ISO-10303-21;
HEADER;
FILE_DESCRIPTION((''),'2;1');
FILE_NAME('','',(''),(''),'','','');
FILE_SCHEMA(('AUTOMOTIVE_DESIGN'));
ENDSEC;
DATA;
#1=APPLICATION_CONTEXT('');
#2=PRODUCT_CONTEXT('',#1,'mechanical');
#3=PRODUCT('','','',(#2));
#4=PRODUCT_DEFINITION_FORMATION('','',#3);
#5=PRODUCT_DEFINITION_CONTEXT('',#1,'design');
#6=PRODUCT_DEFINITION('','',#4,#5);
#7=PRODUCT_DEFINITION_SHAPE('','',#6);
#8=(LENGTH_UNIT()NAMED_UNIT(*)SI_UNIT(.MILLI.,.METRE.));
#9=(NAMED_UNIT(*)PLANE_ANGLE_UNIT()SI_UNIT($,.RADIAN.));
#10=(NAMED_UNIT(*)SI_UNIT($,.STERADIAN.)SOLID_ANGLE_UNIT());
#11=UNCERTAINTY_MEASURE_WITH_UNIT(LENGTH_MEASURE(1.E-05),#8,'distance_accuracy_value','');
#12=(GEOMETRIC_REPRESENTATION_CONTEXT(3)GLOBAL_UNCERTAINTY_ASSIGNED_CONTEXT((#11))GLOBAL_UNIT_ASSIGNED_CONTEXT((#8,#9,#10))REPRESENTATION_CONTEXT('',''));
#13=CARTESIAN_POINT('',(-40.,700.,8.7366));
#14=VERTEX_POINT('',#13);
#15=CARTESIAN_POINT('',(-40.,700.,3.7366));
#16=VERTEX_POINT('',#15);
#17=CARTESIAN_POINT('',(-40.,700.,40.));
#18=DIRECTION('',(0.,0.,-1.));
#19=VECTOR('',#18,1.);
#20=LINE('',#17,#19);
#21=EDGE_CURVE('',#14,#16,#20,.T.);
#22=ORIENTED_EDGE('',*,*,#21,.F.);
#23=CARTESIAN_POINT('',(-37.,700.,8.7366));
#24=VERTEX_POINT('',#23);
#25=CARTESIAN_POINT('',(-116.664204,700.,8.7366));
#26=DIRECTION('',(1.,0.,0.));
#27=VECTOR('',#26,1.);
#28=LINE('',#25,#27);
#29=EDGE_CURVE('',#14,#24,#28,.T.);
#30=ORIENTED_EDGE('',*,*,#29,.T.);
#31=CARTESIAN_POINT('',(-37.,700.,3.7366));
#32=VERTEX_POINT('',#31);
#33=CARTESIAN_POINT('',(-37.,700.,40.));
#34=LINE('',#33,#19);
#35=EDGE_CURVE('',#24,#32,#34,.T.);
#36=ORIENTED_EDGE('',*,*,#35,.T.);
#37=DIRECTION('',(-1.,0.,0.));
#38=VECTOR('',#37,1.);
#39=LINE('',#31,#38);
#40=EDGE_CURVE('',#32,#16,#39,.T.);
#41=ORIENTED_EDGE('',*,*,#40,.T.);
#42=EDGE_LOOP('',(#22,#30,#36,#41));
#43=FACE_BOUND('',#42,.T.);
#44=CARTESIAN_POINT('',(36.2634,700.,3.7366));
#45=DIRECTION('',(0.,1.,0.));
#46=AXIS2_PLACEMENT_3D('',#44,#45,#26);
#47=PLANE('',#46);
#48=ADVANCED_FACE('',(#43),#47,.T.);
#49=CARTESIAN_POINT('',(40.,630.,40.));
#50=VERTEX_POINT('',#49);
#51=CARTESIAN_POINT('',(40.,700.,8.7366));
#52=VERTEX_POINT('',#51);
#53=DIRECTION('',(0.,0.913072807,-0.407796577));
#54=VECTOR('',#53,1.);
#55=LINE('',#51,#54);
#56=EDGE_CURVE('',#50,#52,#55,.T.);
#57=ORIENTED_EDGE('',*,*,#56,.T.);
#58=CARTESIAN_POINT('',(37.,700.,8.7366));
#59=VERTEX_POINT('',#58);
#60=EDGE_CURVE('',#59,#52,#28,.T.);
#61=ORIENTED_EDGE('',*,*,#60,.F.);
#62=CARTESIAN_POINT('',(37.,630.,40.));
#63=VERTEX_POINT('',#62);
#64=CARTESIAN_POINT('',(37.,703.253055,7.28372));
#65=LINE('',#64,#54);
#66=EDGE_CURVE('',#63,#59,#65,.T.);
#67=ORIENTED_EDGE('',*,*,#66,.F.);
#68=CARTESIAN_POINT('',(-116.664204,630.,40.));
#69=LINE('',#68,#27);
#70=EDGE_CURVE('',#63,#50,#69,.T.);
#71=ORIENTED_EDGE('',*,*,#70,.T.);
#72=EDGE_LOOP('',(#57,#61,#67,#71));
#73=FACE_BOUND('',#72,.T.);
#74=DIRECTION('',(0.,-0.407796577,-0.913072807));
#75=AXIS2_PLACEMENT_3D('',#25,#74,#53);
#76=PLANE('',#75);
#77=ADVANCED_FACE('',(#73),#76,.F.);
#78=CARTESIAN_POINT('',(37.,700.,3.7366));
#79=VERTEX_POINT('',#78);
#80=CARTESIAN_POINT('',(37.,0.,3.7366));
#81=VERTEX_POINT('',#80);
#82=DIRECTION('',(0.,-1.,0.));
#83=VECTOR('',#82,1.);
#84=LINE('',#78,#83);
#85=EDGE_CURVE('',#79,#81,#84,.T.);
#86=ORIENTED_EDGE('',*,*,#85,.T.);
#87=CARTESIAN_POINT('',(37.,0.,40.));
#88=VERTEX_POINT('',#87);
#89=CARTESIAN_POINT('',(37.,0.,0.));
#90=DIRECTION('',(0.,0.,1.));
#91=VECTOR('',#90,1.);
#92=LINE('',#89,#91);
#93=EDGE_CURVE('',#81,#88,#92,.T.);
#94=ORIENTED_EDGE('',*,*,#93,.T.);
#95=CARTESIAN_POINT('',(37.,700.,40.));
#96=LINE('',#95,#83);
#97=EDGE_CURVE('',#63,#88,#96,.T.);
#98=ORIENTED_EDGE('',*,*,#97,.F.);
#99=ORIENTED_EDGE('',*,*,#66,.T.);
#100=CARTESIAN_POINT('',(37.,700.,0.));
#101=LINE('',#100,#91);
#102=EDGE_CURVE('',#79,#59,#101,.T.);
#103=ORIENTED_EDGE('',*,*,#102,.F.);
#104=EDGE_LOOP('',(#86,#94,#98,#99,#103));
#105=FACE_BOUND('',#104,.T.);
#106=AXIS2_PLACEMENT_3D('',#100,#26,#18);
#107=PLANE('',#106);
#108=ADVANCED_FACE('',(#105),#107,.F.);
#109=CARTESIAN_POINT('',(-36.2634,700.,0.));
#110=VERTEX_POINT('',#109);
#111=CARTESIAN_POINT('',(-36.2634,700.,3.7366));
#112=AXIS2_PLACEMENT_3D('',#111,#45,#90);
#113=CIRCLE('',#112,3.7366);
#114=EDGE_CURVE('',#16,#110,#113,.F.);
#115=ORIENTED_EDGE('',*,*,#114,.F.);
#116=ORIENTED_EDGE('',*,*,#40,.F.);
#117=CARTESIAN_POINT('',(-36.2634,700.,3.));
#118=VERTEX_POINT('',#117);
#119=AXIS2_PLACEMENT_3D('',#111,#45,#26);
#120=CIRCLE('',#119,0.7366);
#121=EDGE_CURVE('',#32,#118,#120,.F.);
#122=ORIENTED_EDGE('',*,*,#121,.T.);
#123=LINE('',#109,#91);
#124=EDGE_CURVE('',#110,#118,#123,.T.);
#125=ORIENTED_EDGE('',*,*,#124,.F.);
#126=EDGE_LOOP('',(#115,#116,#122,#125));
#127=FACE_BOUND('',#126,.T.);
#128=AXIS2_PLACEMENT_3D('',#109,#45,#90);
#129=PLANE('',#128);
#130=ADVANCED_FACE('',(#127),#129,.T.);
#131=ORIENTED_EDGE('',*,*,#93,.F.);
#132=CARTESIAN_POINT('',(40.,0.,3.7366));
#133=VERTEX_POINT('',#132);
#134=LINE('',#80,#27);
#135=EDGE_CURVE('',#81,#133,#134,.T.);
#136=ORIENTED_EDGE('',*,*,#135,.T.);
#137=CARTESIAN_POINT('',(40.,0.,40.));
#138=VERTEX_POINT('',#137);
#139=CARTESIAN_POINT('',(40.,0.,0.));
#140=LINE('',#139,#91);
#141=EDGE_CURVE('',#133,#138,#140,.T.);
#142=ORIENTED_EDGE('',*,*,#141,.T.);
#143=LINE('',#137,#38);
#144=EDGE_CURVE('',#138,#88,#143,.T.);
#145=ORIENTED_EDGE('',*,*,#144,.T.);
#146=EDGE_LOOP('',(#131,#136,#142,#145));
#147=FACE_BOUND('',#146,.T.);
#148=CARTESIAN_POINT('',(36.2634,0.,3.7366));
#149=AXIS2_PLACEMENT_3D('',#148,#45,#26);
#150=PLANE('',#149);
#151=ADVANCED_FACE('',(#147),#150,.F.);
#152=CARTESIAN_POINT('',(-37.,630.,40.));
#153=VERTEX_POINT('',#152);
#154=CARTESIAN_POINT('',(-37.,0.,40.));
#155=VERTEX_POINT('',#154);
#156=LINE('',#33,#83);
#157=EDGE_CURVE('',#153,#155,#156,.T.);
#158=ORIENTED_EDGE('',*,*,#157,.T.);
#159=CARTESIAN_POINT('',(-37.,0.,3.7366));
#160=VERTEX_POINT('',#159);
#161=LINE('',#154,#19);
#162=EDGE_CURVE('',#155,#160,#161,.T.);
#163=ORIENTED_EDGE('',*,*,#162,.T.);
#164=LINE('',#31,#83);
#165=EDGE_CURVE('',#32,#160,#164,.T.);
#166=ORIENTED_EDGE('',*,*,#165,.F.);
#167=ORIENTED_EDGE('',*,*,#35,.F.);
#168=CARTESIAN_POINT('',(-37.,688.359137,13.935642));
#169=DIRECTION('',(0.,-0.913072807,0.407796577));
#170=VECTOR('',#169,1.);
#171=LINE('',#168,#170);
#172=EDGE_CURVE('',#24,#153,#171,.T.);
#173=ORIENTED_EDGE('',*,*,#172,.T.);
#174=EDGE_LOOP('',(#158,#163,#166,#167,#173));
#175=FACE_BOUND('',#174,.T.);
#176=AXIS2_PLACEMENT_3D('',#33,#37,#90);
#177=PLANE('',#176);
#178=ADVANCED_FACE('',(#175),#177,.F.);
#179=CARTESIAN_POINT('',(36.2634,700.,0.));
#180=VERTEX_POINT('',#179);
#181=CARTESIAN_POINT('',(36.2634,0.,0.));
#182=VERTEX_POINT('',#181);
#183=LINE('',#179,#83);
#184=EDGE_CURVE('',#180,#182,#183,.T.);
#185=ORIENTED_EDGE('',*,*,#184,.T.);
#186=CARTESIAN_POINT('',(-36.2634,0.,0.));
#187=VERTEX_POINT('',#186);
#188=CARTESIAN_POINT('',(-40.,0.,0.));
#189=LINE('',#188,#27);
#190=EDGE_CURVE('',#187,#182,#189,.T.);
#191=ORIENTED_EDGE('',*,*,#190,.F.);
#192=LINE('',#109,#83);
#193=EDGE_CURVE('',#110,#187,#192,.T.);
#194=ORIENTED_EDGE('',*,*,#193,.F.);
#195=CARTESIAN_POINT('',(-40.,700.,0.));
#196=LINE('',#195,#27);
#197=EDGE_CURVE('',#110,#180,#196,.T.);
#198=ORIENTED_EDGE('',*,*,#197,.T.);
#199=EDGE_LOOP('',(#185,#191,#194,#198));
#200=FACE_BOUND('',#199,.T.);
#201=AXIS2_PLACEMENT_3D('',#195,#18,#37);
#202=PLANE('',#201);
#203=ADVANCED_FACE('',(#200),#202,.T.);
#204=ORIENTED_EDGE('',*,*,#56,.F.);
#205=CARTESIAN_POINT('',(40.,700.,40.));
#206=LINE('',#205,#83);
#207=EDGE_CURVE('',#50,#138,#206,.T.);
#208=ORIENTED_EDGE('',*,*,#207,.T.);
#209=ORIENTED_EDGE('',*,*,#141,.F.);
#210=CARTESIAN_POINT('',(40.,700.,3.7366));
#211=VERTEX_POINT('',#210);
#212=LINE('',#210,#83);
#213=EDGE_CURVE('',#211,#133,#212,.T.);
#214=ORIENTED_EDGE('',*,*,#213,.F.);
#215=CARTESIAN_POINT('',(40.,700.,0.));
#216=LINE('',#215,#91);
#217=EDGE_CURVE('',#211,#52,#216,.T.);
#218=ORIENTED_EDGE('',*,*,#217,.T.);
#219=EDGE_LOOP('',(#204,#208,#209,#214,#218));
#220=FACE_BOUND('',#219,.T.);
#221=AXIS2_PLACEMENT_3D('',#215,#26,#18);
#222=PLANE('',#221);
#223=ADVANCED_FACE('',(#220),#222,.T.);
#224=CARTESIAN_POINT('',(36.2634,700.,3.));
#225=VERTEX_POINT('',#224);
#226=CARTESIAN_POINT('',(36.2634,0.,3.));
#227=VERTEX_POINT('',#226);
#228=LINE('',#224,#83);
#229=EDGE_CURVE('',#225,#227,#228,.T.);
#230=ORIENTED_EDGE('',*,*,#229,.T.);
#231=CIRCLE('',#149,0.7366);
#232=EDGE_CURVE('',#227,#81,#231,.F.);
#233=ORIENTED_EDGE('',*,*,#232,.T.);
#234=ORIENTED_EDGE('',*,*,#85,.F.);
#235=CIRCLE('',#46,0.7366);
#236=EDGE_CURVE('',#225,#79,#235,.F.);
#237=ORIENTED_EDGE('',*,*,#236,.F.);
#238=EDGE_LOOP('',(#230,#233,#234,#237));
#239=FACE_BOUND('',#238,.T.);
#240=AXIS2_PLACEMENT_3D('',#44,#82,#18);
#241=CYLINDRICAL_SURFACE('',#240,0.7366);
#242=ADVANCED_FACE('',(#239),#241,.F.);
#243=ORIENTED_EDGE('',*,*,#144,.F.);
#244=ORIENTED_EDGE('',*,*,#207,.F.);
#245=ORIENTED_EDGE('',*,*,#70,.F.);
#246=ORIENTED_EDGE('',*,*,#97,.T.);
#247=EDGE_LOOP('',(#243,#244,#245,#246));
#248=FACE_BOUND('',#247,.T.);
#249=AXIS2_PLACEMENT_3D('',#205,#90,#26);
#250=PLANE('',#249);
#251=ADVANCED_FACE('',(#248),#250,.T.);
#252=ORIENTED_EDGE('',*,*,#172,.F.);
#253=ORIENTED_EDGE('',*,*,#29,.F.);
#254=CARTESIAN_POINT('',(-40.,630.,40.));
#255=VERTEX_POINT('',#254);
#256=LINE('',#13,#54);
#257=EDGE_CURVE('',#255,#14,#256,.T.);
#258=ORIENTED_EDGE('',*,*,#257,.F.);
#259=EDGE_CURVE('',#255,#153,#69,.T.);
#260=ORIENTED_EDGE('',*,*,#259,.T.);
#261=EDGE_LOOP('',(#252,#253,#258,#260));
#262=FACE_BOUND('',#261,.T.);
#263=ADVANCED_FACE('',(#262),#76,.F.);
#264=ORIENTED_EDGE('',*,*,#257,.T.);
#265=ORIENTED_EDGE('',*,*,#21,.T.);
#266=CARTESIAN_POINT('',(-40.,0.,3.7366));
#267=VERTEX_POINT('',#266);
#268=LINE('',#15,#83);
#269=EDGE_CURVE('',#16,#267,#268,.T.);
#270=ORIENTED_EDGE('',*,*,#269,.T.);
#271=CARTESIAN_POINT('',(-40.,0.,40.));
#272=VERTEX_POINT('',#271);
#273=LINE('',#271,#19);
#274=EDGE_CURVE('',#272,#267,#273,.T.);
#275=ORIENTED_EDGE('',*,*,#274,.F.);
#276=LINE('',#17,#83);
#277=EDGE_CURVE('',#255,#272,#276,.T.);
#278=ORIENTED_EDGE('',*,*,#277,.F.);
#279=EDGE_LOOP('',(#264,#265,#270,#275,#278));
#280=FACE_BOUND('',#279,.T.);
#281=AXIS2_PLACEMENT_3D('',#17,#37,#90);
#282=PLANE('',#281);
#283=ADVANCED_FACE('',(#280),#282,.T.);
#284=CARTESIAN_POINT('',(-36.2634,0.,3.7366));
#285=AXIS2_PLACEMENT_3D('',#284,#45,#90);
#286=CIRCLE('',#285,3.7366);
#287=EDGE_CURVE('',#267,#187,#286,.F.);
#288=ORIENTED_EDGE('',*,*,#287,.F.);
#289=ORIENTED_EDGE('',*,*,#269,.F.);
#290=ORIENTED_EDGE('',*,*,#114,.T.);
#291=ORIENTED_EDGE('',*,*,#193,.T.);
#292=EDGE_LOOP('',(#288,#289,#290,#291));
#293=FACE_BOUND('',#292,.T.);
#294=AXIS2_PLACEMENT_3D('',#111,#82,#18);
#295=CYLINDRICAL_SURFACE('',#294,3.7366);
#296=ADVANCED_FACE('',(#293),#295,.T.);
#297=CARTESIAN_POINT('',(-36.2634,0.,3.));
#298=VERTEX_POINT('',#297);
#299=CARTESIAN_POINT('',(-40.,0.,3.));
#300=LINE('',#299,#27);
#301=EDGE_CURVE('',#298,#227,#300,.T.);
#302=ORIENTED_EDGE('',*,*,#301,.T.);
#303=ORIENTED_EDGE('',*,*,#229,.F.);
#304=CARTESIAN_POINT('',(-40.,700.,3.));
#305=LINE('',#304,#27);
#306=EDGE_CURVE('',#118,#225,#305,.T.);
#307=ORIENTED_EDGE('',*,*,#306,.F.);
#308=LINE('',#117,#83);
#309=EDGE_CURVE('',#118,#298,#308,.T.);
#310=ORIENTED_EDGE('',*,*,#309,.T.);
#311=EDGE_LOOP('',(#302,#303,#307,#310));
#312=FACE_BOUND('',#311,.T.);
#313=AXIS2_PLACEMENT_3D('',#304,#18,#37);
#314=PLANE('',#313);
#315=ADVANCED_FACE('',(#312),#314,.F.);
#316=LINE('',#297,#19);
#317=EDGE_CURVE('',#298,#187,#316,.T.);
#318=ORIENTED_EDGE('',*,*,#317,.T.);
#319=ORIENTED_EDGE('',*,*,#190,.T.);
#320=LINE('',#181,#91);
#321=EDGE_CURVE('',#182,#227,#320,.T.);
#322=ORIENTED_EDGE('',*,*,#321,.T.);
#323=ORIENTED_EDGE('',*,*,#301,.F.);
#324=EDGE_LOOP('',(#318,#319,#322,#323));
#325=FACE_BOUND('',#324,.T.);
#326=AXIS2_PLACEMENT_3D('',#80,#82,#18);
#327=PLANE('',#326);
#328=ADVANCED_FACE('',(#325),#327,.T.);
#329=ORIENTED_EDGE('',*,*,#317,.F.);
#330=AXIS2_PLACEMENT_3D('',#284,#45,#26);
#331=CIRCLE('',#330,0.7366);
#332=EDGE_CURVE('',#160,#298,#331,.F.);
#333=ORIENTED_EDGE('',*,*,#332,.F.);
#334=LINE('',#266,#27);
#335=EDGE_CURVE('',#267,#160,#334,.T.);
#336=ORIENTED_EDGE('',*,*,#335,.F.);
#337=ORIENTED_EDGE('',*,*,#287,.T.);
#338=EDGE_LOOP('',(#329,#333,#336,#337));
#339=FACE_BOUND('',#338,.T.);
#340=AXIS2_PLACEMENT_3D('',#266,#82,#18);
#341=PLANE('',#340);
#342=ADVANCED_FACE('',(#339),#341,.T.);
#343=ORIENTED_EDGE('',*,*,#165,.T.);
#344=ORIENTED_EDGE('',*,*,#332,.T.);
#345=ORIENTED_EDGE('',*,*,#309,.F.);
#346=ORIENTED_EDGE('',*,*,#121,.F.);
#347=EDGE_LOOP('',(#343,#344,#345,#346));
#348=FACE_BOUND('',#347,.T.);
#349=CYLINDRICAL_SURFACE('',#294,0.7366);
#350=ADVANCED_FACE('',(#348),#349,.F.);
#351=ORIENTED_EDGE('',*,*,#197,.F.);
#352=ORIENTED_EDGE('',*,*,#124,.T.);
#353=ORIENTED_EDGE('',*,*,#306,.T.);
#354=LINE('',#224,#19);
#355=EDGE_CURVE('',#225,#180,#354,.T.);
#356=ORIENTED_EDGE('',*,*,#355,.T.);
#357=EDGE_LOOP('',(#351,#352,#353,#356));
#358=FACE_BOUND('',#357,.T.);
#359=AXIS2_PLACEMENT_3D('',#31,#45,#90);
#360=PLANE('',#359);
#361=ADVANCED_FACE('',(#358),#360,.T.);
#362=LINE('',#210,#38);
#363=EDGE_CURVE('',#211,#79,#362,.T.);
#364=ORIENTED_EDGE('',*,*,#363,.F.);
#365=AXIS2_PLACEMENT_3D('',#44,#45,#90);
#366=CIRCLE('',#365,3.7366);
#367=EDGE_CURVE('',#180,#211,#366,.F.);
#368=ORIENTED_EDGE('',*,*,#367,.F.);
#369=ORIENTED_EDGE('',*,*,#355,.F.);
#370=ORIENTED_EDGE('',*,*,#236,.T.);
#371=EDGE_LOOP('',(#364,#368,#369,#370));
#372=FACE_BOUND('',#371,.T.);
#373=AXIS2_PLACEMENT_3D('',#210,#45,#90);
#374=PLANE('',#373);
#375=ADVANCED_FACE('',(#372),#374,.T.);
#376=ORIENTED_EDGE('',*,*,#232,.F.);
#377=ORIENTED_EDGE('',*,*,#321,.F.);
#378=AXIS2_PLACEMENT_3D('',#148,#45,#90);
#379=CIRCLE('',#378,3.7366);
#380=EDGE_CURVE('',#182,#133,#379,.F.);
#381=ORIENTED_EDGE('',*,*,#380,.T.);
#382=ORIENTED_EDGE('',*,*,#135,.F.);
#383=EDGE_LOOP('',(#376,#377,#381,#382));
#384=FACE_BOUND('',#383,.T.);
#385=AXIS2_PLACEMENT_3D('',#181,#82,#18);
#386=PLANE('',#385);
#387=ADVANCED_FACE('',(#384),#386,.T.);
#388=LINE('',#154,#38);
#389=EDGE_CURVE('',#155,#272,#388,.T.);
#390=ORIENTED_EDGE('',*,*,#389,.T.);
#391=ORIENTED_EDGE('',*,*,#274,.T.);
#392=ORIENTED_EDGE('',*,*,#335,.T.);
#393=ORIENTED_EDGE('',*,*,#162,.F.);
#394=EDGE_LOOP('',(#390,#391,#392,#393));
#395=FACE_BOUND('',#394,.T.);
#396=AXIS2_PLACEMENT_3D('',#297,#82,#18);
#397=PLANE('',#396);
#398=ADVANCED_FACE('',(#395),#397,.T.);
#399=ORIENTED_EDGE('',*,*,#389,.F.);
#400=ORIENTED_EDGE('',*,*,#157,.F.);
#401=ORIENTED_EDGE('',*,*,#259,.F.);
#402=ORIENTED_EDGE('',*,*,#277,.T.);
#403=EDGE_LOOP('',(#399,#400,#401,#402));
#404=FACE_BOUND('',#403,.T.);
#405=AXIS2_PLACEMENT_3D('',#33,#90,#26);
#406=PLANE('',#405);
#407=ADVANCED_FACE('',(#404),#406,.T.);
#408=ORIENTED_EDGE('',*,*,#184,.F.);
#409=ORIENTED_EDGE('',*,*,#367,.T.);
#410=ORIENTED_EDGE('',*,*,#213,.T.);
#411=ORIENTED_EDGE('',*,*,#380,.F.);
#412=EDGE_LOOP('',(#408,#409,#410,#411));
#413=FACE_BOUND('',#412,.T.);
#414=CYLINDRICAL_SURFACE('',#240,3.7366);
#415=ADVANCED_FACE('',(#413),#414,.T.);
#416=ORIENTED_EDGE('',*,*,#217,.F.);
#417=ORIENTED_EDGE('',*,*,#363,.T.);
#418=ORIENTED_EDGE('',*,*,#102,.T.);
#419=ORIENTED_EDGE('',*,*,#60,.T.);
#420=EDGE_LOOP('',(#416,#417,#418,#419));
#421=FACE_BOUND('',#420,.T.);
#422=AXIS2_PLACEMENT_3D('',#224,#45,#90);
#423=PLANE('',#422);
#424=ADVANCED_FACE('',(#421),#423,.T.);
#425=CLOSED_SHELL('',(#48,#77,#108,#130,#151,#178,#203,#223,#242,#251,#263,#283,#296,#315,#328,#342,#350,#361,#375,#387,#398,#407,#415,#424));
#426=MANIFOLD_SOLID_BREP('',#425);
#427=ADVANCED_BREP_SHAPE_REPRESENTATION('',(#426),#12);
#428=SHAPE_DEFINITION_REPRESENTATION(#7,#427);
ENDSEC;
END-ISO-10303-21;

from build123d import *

# Parameters (mm, degrees)
BASE_FLANGE1_DEPTH             = 700
CUT_EXTRUDE1_REACH             = 704.282
CUT_EXTRUDE1_DIRECTION_2_REACH = 704.282


# Sheet-metal steps are written as plain solids
with BuildPart() as part:
    # Sketch1 → Base-Flange1 (new body)
    with BuildSketch(Plane(origin=(0, 0, 0), x_dir=(1, 0, 0), z_dir=(0, 1, 0))):
        with BuildLine():
            Line((-40, -40), (-40, -3.7366))
            ThreePointArc((-40, -3.7366), (-38.905575199, -1.094424801), (-36.2634, 0))
            Line((-36.2634, 0), (36.2634, 0))
            ThreePointArc((36.2634, 0), (38.905575199, -1.094424801), (40, -3.7366))
            Line((40, -3.7366), (40, -40))
            Line((40, -40), (37, -40))
            Line((37, -40), (37, -3.7366))
            ThreePointArc((37, -3.7366), (36.784254855, -3.215745145), (36.2634, -3))
            Line((36.2634, -3), (-36.2634, -3))
            ThreePointArc((-36.2634, -3), (-36.784254855, -3.215745145), (-37, -3.7366))
            Line((-37, -3.7366), (-37, -40))
            Line((-37, -40), (-40, -40))
        make_face()
    extrude(amount=BASE_FLANGE1_DEPTH)

    # Cut-Extrude1: up to this face of the body (flat: up to its plane)
    cut_extrude1_end = Plane(part.part.faces().sort_by_distance((-40, 350, 21.8683))[0])
    # Sketch6 → Cut-Extrude1 (cut, up to the picked face)
    with BuildSketch(Plane(origin=(0, 0, 0), x_dir=(0, 0, -1), z_dir=(1, 0, 0)), mode=Mode.PRIVATE) as cut_extrude1_sk1:
        Polygon((-8.7366, 700), (-40, 630), (-40, 700), align=None)
    cut_extrude1_tool1 = split(extrude(cut_extrude1_sk1.sketch, amount=-CUT_EXTRUDE1_REACH, mode=Mode.PRIVATE), bisect_by=cut_extrude1_end, keep=Keep.BOTH, mode=Mode.PRIVATE)
    add(cut_extrude1_tool1.solids().sort_by(Axis((0, 676.666667, 29.578867), (-1, 0, 0)))[0], mode=Mode.SUBTRACT)

    # Cut-Extrude1 direction 2: up to this face of the body (flat: up to its plane)
    cut_extrude1_direction_2_end = Plane(part.part.faces().sort_by_distance((40, 350, 21.8683))[0])
    # Sketch6 → Cut-Extrude1 direction 2 (cut, up to the picked face)
    with BuildSketch(Plane(origin=(0, 0, 0), x_dir=(0, 0, -1), z_dir=(1, 0, 0)), mode=Mode.PRIVATE) as cut_extrude1_direction_2_sk1:
        Polygon((-8.7366, 700), (-40, 630), (-40, 700), align=None)
    cut_extrude1_direction_2_tool1 = split(extrude(cut_extrude1_direction_2_sk1.sketch, amount=CUT_EXTRUDE1_DIRECTION_2_REACH, mode=Mode.PRIVATE), bisect_by=cut_extrude1_direction_2_end, keep=Keep.BOTH, mode=Mode.PRIVATE)
    add(cut_extrude1_direction_2_tool1.solids().sort_by(Axis((0, 676.666667, 29.578867), (1, 0, 0)))[0], mode=Mode.SUBTRACT)


solid = part.part
